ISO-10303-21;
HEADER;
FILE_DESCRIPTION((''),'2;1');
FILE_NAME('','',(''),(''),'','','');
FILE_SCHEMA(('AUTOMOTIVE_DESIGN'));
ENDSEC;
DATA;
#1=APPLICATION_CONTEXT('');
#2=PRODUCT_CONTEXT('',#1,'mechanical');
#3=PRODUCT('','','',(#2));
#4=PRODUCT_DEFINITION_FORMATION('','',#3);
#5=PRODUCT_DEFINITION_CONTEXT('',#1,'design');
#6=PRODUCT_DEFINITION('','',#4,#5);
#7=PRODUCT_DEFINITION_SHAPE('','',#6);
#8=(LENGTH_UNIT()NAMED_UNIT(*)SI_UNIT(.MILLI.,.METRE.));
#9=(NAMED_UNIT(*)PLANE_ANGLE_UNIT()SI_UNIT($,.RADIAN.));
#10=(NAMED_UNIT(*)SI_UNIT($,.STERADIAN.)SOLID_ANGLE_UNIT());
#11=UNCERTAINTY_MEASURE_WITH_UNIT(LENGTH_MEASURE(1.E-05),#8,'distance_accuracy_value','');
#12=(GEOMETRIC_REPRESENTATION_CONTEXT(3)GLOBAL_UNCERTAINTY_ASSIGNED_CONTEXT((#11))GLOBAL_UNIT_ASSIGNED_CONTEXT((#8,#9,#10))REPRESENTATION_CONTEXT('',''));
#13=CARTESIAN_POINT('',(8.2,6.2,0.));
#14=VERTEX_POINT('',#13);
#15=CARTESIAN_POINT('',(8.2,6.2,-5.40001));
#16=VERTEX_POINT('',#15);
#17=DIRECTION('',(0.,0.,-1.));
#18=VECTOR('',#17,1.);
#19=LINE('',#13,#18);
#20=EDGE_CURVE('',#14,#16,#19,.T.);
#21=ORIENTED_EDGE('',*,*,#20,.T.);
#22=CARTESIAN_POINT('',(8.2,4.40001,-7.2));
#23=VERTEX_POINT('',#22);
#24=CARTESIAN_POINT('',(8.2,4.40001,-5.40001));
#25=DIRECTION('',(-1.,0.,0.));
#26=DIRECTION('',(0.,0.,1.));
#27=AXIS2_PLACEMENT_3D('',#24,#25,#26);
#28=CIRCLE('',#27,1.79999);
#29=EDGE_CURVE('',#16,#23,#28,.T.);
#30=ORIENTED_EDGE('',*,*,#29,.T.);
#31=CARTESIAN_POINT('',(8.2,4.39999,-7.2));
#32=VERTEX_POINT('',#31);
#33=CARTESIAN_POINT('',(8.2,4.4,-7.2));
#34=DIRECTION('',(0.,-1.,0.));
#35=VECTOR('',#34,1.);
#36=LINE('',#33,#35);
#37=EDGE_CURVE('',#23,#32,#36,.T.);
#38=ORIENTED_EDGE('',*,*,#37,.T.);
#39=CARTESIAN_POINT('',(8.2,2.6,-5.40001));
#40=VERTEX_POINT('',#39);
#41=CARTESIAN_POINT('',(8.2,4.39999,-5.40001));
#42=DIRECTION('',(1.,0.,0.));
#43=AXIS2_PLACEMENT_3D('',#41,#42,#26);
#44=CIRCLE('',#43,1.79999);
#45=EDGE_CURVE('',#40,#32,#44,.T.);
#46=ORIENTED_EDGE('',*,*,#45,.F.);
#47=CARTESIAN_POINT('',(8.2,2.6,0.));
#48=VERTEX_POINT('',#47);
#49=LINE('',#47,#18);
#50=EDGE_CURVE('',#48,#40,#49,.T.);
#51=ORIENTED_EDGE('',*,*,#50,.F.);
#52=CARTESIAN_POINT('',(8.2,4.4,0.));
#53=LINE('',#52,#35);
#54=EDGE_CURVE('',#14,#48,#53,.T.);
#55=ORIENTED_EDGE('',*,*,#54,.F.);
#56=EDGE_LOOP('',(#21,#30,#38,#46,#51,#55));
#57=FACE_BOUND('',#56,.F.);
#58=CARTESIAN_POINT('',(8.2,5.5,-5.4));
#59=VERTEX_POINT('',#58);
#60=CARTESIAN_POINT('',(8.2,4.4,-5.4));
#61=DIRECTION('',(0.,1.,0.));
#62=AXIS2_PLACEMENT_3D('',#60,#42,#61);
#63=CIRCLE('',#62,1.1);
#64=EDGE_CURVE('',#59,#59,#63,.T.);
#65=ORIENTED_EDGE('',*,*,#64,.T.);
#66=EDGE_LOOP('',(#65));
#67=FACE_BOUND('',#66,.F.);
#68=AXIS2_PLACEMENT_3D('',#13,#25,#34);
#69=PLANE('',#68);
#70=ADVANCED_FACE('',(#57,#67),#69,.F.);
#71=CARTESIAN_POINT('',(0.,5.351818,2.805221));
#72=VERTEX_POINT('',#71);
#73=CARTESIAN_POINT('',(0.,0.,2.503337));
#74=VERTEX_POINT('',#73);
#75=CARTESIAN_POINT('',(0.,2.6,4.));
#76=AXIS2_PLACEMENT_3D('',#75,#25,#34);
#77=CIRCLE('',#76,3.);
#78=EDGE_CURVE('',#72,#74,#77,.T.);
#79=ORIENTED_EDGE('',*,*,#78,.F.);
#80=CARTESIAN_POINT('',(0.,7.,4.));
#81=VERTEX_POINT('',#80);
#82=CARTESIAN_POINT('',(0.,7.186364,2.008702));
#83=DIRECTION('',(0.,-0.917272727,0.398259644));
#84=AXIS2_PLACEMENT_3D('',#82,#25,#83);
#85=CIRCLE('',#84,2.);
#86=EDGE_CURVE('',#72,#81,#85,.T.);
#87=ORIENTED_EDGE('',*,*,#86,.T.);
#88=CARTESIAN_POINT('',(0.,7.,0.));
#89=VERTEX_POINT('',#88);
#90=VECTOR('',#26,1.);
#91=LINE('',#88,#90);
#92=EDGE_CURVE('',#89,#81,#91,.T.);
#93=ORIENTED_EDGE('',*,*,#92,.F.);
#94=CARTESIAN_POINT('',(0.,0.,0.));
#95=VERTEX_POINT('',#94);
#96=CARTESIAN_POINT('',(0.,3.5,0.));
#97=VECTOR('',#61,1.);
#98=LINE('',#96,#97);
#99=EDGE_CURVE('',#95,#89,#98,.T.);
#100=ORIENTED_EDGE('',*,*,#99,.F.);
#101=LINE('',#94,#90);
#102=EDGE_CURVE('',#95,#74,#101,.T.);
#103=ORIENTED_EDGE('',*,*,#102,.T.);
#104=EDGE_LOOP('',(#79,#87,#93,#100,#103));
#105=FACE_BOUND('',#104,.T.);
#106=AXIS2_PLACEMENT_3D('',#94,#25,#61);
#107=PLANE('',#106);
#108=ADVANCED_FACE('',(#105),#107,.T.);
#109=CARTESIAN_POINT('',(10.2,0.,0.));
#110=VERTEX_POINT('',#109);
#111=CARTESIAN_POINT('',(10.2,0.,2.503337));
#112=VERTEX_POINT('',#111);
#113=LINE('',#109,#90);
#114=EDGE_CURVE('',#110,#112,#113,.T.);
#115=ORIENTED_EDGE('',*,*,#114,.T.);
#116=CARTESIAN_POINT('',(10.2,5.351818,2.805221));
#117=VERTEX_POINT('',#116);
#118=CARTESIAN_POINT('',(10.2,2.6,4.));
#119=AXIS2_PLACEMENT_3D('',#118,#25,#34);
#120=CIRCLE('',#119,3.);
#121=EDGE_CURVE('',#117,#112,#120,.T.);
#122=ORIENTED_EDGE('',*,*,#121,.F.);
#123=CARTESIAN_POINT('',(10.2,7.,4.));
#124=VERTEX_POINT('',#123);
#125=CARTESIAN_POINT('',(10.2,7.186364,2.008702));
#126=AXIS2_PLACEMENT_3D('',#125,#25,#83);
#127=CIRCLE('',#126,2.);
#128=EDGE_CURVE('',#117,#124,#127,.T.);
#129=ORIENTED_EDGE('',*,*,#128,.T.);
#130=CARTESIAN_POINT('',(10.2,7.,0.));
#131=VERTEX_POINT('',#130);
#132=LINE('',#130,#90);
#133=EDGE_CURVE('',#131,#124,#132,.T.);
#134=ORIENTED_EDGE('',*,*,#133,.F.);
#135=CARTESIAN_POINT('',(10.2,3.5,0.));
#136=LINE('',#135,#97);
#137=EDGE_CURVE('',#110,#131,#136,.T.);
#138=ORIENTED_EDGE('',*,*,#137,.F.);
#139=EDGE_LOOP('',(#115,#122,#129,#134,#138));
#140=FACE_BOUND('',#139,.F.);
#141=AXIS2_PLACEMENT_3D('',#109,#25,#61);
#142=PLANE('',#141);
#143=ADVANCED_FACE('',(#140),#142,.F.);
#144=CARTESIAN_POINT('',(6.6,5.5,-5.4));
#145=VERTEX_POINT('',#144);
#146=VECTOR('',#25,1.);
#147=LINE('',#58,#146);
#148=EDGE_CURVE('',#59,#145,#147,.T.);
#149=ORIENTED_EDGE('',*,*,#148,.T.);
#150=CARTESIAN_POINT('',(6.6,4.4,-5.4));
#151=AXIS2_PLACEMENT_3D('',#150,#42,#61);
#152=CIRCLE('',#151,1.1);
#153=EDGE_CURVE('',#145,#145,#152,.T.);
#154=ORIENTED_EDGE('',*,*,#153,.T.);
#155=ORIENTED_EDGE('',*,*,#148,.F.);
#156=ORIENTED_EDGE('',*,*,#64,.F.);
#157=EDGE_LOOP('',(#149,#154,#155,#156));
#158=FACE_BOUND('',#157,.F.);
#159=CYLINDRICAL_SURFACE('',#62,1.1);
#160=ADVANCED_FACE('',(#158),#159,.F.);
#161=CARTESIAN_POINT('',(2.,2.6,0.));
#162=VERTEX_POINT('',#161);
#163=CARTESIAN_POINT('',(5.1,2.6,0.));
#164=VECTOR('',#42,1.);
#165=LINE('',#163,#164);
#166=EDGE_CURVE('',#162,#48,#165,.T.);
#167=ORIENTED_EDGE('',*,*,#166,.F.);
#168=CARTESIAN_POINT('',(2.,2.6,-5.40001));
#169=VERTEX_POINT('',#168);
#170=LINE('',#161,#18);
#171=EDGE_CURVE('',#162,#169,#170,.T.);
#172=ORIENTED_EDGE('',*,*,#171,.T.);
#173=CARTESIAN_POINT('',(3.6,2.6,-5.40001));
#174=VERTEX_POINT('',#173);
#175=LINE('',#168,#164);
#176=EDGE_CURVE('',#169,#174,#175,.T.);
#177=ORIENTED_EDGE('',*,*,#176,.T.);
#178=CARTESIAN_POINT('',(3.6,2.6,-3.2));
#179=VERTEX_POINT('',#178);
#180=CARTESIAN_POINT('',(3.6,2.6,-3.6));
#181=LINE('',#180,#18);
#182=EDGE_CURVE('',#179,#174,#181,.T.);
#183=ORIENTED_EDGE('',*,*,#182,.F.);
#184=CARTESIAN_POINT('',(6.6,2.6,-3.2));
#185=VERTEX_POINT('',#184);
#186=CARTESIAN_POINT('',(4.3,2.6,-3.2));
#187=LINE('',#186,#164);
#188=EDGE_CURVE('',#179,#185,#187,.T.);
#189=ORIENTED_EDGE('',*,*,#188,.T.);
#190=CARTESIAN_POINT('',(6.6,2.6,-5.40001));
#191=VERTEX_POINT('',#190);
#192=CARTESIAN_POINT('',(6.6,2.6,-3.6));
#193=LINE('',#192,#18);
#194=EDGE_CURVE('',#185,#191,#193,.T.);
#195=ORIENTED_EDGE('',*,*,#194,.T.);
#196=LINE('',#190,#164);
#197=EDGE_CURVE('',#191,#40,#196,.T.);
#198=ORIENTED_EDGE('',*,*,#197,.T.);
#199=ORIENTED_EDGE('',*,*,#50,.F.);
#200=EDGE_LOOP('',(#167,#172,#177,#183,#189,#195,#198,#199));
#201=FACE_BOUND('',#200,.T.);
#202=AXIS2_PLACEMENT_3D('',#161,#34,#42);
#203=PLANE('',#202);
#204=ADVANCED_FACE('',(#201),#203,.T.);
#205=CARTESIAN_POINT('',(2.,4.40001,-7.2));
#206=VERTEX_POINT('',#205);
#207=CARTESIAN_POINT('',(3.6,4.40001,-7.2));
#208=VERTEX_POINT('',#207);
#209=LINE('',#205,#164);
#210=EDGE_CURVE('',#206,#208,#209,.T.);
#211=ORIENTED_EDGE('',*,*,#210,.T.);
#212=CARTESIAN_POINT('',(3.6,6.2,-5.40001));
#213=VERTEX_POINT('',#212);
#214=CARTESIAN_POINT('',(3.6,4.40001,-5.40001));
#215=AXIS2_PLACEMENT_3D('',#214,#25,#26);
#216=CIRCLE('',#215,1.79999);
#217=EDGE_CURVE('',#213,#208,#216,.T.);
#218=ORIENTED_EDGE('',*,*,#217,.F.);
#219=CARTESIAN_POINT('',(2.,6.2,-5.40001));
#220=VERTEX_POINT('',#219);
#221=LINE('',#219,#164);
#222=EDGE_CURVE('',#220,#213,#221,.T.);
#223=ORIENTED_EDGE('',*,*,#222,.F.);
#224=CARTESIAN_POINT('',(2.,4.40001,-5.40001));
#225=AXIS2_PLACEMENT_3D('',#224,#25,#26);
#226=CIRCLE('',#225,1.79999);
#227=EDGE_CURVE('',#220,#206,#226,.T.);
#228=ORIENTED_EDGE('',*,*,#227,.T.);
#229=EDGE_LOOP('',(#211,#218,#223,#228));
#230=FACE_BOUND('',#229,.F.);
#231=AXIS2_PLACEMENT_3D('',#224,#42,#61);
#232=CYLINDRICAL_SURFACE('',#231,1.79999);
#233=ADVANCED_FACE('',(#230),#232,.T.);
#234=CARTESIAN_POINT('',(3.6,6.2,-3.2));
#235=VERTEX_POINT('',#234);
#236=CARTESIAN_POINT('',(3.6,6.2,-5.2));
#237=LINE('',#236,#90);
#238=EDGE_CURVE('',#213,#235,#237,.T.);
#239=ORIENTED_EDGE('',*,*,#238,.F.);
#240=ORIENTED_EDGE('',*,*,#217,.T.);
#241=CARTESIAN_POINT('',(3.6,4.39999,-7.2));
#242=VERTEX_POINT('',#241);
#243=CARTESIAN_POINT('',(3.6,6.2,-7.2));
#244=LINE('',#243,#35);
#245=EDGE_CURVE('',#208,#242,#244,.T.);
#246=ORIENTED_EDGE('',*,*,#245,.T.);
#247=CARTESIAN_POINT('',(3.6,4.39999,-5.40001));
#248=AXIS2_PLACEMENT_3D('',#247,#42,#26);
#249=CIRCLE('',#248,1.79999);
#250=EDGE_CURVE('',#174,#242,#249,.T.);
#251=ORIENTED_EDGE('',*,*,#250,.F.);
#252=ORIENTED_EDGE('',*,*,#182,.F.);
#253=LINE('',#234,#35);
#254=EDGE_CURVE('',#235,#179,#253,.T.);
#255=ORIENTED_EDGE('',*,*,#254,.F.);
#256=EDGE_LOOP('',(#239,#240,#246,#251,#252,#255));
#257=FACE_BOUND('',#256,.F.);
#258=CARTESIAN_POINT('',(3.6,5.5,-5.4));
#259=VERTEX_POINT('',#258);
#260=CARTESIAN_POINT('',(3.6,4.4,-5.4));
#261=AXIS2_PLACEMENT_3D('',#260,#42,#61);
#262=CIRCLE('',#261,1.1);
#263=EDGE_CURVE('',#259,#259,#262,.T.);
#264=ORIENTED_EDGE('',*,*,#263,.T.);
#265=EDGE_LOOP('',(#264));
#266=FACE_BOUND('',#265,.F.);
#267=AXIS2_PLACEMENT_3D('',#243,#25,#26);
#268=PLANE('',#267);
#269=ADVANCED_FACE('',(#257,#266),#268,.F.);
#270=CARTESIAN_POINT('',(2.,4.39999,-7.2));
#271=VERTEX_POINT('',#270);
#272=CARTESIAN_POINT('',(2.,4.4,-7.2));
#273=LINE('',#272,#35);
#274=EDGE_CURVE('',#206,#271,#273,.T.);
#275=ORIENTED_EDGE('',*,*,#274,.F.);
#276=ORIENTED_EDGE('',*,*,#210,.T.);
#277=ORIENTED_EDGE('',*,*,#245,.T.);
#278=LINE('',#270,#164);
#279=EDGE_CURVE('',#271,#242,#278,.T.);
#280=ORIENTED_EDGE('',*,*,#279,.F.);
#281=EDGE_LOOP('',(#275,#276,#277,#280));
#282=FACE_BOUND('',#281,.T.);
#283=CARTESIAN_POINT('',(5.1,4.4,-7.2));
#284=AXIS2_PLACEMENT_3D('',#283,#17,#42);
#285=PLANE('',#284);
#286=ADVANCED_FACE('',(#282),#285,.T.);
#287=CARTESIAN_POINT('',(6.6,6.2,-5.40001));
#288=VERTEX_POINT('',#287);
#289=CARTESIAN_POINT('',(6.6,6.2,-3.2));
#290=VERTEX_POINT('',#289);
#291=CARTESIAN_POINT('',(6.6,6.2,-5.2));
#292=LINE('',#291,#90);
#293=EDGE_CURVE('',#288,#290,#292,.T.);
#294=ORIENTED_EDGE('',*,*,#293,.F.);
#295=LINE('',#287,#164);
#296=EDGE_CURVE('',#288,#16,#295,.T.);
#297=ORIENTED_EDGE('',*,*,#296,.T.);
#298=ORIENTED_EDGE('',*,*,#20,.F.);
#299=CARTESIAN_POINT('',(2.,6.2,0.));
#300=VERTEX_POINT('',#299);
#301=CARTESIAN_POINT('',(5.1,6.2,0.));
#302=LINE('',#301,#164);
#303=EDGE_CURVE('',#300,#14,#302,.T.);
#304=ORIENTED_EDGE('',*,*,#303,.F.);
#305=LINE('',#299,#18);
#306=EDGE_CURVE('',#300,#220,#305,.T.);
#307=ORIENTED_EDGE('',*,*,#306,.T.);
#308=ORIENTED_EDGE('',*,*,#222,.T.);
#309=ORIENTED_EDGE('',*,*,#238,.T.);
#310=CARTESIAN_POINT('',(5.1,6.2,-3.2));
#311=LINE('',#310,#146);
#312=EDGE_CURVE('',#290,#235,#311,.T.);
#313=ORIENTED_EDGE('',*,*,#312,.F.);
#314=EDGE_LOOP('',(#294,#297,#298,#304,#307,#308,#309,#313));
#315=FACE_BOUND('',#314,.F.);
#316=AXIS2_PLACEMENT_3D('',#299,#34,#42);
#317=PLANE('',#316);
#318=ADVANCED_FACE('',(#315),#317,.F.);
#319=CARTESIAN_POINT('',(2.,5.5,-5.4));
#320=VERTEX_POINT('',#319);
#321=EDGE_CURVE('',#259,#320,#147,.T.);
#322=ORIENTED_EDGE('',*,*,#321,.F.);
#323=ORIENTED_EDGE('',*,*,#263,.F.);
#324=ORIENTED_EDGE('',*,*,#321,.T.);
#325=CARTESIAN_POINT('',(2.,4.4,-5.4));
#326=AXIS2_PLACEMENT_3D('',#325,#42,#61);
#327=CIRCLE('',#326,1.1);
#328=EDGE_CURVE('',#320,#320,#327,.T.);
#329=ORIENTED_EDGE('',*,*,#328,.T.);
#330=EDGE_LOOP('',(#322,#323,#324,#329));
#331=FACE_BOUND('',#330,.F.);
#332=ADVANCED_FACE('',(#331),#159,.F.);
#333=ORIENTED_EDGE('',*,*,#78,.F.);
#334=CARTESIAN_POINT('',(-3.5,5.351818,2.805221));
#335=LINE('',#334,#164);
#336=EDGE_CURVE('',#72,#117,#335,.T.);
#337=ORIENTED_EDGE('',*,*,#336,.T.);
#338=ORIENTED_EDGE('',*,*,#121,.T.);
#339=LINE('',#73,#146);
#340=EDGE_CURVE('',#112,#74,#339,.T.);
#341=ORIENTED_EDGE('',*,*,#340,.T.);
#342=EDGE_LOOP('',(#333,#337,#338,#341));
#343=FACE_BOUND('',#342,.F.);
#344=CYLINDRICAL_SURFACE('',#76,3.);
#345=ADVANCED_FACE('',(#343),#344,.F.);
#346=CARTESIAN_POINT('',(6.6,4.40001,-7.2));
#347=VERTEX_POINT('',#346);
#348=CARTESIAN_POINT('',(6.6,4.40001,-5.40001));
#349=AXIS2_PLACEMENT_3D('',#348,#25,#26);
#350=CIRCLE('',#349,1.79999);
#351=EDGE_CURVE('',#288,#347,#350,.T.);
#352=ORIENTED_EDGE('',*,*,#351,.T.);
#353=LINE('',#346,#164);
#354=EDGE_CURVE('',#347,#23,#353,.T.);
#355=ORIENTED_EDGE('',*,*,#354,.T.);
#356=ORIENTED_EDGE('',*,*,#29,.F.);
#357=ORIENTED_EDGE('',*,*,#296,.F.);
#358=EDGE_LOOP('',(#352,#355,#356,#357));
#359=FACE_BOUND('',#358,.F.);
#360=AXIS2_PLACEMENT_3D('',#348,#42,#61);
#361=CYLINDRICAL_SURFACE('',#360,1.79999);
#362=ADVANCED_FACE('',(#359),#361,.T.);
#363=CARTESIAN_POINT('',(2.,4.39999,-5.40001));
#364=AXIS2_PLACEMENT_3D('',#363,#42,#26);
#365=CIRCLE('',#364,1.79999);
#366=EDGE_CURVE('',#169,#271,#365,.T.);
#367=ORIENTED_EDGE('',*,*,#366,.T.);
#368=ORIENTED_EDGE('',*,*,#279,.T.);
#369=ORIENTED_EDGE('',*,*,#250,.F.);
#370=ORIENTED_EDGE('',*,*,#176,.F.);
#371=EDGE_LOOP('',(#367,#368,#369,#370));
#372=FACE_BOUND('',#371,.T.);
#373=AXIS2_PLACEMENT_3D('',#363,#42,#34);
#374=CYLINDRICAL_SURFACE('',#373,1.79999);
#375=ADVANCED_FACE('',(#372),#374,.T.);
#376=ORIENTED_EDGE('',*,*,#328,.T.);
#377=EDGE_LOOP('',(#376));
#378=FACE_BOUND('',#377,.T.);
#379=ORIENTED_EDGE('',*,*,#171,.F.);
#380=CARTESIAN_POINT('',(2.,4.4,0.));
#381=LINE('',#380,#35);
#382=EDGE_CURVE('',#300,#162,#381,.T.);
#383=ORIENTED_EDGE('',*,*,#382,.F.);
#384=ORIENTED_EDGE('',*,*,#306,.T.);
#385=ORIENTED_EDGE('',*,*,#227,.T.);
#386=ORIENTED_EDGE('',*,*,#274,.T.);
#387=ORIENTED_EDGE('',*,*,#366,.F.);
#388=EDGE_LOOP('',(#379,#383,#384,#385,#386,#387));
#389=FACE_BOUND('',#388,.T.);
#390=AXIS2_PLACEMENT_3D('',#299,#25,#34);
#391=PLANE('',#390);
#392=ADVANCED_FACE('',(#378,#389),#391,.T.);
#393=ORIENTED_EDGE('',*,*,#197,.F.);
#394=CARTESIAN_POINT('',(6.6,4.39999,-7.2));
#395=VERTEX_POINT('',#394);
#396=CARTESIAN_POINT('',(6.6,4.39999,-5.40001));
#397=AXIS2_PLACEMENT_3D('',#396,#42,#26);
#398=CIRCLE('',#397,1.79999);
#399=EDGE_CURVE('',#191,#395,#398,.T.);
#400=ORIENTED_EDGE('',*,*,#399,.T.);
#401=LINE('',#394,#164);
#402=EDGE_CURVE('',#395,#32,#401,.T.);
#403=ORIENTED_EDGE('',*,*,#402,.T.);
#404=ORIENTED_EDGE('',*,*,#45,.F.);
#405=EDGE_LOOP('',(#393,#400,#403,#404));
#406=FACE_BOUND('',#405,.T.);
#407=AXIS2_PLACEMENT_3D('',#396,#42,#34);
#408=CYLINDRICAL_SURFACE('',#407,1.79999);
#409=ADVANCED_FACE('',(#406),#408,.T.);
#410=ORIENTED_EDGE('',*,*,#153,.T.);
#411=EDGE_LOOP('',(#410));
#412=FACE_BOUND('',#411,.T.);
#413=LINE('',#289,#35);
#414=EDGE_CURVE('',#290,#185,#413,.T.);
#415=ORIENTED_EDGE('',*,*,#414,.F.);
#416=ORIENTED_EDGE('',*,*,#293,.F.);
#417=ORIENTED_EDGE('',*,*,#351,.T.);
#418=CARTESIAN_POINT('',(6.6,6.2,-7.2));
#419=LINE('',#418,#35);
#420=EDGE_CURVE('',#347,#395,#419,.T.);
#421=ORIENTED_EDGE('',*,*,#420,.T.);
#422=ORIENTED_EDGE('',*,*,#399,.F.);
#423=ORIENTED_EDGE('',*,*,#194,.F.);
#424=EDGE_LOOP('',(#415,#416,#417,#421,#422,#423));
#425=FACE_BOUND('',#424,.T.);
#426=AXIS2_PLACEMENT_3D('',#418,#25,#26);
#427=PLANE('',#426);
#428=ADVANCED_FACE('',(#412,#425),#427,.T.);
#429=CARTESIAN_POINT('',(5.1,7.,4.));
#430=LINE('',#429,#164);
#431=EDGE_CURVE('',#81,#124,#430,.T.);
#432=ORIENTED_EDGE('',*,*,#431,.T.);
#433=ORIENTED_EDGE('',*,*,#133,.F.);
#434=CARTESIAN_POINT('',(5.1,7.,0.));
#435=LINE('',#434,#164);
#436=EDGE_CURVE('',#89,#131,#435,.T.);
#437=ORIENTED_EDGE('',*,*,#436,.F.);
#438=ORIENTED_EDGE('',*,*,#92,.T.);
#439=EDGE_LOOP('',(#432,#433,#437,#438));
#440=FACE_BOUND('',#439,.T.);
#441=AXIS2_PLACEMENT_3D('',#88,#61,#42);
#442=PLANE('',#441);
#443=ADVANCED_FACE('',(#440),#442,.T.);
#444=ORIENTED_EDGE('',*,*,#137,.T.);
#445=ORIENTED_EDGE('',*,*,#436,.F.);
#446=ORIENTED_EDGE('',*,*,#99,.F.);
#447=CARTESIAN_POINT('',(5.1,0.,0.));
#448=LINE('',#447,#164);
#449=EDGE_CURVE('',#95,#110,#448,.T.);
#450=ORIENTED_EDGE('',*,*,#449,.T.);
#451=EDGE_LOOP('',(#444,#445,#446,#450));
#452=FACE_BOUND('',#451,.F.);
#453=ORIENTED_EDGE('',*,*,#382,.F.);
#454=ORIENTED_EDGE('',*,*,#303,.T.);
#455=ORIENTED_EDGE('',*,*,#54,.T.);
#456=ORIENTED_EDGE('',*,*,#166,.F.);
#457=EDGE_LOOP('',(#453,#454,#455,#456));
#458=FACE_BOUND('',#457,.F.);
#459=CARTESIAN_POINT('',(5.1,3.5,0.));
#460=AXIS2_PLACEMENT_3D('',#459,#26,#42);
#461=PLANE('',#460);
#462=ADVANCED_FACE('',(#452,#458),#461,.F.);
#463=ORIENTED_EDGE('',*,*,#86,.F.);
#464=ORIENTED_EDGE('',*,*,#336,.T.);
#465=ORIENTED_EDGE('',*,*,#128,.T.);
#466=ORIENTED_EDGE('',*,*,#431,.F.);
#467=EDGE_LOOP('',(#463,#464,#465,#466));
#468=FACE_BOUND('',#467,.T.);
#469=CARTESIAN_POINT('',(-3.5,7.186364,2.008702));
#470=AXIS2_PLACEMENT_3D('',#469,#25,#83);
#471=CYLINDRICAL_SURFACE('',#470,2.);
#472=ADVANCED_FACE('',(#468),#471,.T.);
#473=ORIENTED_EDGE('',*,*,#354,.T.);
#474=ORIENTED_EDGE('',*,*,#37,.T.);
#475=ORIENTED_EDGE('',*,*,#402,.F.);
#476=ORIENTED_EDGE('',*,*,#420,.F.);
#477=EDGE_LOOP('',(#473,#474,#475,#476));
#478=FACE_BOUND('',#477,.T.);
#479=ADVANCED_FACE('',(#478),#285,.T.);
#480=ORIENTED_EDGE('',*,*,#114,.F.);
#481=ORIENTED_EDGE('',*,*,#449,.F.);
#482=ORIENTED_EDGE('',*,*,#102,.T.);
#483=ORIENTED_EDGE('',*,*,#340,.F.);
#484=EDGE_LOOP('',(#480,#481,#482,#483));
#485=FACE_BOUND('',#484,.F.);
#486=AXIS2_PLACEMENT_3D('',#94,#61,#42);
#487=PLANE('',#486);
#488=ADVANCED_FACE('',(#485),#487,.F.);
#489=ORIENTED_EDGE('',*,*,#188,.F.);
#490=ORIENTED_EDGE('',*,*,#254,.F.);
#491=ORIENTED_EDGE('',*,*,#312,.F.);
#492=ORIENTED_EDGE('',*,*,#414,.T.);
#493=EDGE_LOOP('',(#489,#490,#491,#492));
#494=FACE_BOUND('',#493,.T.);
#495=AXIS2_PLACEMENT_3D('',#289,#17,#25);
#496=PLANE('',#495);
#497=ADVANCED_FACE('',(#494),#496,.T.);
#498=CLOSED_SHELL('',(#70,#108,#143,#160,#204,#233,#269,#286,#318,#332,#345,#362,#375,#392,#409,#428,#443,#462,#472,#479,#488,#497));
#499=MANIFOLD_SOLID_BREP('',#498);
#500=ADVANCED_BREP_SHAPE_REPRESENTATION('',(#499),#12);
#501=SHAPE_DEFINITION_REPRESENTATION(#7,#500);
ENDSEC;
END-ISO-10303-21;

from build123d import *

# Parameters (mm, degrees)
F0_W         = 10.2
F0_H         = 7
F1_DEPTH     = 4
F2_W         = 6.2
F2_H         = 3.6
F3_DEPTH     = 7.2
F4_W         = 3
F4_H         = 4
F5_DEPTH     = 25
F6_R         = 1.79999
F7_R         = 1.1
F8_DEPTH     = 25
F9_R         = 3
F10_DEPTH    = 25
F11_T1_DEPTH = 17.2


# Not quite as in the source:
# - a fillet or chamfer that OpenCascade refuses, or shapes differently, is made with other operations: its cross-section is extruded or revolved along the edge and cut away or added
# - a fillet or chamfer is up to 0.001 mm smaller than in the source, because OpenCascade refuses the exact size


with BuildPart() as f1:
    # F0 (on Top) → F1 (new body)
    with BuildSketch(Plane.XY):
        with Locations((5.1, 3.5)):
            Rectangle(F0_W, F0_H)
    extrude(amount=F1_DEPTH)

    # F2 (on face) → F3 (join)
    with BuildSketch(Plane(origin=(0, 0, 0), x_dir=(1, 0, 0), z_dir=(0, 0, -1))):
        with Locations((5.1, -4.4)):
            Rectangle(F2_W, F2_H)
    extrude(amount=F3_DEPTH)

    # F4 (on face) → F5 (cut)
    with BuildSketch(Plane(origin=(0, 6.2, 0), x_dir=(-1, 0, 0), z_dir=(0, 1, 0))):
        with Locations((-5.1, -5.2)):
            Rectangle(F4_W, F4_H)
    extrude(amount=-F5_DEPTH, mode=Mode.SUBTRACT)

    # F6 (radius 1.8 in the source; OpenCascade refuses exactly that, so slightly less here)
    f6_edges = [f1.edges().sort_by_distance(p)[0] for p in [
        (2.8, 2.6, -7.2),
        (7.4, 2.6, -7.2),
        (2.8, 6.2, -7.2),
        (7.4, 6.2, -7.2),
    ]]
    fillet(f6_edges, radius=F6_R)

    # F7 (on face) → F8 (cut)
    with BuildSketch(Plane.YZ.offset(8.2)):
        with Locations((4.4, -5.4)):
            Circle(F7_R)
    extrude(amount=-F8_DEPTH, mode=Mode.SUBTRACT)

    # F9 (on face) → F10 (cut)
    with BuildSketch(Plane(origin=(0, 0, 0), x_dir=(0, -1, 0), z_dir=(-1, 0, 0))):
        with Locations((-2.6, 4)):
            Circle(F9_R)
    extrude(amount=-F10_DEPTH, mode=Mode.SUBTRACT)

    # F11: fillet of radius 2 on 1 edges, made by hand

    # F11_s2 → F11_t1 (cut)
    with BuildSketch(Plane.YZ.offset(-3.5)):
        with BuildLine():
            ThreePointArc((5.3518181818, 2.8052210689), (6.0125269518, 3.627994046), (7, 4))
            Line((7, 4), (5.6, 4))
            ThreePointArc((5.6, 4), (5.5372993162, 3.3898584367), (5.3518181818, 2.8052210689))
        make_face()
    extrude(amount=F11_T1_DEPTH, mode=Mode.SUBTRACT)


solid = f1.part
